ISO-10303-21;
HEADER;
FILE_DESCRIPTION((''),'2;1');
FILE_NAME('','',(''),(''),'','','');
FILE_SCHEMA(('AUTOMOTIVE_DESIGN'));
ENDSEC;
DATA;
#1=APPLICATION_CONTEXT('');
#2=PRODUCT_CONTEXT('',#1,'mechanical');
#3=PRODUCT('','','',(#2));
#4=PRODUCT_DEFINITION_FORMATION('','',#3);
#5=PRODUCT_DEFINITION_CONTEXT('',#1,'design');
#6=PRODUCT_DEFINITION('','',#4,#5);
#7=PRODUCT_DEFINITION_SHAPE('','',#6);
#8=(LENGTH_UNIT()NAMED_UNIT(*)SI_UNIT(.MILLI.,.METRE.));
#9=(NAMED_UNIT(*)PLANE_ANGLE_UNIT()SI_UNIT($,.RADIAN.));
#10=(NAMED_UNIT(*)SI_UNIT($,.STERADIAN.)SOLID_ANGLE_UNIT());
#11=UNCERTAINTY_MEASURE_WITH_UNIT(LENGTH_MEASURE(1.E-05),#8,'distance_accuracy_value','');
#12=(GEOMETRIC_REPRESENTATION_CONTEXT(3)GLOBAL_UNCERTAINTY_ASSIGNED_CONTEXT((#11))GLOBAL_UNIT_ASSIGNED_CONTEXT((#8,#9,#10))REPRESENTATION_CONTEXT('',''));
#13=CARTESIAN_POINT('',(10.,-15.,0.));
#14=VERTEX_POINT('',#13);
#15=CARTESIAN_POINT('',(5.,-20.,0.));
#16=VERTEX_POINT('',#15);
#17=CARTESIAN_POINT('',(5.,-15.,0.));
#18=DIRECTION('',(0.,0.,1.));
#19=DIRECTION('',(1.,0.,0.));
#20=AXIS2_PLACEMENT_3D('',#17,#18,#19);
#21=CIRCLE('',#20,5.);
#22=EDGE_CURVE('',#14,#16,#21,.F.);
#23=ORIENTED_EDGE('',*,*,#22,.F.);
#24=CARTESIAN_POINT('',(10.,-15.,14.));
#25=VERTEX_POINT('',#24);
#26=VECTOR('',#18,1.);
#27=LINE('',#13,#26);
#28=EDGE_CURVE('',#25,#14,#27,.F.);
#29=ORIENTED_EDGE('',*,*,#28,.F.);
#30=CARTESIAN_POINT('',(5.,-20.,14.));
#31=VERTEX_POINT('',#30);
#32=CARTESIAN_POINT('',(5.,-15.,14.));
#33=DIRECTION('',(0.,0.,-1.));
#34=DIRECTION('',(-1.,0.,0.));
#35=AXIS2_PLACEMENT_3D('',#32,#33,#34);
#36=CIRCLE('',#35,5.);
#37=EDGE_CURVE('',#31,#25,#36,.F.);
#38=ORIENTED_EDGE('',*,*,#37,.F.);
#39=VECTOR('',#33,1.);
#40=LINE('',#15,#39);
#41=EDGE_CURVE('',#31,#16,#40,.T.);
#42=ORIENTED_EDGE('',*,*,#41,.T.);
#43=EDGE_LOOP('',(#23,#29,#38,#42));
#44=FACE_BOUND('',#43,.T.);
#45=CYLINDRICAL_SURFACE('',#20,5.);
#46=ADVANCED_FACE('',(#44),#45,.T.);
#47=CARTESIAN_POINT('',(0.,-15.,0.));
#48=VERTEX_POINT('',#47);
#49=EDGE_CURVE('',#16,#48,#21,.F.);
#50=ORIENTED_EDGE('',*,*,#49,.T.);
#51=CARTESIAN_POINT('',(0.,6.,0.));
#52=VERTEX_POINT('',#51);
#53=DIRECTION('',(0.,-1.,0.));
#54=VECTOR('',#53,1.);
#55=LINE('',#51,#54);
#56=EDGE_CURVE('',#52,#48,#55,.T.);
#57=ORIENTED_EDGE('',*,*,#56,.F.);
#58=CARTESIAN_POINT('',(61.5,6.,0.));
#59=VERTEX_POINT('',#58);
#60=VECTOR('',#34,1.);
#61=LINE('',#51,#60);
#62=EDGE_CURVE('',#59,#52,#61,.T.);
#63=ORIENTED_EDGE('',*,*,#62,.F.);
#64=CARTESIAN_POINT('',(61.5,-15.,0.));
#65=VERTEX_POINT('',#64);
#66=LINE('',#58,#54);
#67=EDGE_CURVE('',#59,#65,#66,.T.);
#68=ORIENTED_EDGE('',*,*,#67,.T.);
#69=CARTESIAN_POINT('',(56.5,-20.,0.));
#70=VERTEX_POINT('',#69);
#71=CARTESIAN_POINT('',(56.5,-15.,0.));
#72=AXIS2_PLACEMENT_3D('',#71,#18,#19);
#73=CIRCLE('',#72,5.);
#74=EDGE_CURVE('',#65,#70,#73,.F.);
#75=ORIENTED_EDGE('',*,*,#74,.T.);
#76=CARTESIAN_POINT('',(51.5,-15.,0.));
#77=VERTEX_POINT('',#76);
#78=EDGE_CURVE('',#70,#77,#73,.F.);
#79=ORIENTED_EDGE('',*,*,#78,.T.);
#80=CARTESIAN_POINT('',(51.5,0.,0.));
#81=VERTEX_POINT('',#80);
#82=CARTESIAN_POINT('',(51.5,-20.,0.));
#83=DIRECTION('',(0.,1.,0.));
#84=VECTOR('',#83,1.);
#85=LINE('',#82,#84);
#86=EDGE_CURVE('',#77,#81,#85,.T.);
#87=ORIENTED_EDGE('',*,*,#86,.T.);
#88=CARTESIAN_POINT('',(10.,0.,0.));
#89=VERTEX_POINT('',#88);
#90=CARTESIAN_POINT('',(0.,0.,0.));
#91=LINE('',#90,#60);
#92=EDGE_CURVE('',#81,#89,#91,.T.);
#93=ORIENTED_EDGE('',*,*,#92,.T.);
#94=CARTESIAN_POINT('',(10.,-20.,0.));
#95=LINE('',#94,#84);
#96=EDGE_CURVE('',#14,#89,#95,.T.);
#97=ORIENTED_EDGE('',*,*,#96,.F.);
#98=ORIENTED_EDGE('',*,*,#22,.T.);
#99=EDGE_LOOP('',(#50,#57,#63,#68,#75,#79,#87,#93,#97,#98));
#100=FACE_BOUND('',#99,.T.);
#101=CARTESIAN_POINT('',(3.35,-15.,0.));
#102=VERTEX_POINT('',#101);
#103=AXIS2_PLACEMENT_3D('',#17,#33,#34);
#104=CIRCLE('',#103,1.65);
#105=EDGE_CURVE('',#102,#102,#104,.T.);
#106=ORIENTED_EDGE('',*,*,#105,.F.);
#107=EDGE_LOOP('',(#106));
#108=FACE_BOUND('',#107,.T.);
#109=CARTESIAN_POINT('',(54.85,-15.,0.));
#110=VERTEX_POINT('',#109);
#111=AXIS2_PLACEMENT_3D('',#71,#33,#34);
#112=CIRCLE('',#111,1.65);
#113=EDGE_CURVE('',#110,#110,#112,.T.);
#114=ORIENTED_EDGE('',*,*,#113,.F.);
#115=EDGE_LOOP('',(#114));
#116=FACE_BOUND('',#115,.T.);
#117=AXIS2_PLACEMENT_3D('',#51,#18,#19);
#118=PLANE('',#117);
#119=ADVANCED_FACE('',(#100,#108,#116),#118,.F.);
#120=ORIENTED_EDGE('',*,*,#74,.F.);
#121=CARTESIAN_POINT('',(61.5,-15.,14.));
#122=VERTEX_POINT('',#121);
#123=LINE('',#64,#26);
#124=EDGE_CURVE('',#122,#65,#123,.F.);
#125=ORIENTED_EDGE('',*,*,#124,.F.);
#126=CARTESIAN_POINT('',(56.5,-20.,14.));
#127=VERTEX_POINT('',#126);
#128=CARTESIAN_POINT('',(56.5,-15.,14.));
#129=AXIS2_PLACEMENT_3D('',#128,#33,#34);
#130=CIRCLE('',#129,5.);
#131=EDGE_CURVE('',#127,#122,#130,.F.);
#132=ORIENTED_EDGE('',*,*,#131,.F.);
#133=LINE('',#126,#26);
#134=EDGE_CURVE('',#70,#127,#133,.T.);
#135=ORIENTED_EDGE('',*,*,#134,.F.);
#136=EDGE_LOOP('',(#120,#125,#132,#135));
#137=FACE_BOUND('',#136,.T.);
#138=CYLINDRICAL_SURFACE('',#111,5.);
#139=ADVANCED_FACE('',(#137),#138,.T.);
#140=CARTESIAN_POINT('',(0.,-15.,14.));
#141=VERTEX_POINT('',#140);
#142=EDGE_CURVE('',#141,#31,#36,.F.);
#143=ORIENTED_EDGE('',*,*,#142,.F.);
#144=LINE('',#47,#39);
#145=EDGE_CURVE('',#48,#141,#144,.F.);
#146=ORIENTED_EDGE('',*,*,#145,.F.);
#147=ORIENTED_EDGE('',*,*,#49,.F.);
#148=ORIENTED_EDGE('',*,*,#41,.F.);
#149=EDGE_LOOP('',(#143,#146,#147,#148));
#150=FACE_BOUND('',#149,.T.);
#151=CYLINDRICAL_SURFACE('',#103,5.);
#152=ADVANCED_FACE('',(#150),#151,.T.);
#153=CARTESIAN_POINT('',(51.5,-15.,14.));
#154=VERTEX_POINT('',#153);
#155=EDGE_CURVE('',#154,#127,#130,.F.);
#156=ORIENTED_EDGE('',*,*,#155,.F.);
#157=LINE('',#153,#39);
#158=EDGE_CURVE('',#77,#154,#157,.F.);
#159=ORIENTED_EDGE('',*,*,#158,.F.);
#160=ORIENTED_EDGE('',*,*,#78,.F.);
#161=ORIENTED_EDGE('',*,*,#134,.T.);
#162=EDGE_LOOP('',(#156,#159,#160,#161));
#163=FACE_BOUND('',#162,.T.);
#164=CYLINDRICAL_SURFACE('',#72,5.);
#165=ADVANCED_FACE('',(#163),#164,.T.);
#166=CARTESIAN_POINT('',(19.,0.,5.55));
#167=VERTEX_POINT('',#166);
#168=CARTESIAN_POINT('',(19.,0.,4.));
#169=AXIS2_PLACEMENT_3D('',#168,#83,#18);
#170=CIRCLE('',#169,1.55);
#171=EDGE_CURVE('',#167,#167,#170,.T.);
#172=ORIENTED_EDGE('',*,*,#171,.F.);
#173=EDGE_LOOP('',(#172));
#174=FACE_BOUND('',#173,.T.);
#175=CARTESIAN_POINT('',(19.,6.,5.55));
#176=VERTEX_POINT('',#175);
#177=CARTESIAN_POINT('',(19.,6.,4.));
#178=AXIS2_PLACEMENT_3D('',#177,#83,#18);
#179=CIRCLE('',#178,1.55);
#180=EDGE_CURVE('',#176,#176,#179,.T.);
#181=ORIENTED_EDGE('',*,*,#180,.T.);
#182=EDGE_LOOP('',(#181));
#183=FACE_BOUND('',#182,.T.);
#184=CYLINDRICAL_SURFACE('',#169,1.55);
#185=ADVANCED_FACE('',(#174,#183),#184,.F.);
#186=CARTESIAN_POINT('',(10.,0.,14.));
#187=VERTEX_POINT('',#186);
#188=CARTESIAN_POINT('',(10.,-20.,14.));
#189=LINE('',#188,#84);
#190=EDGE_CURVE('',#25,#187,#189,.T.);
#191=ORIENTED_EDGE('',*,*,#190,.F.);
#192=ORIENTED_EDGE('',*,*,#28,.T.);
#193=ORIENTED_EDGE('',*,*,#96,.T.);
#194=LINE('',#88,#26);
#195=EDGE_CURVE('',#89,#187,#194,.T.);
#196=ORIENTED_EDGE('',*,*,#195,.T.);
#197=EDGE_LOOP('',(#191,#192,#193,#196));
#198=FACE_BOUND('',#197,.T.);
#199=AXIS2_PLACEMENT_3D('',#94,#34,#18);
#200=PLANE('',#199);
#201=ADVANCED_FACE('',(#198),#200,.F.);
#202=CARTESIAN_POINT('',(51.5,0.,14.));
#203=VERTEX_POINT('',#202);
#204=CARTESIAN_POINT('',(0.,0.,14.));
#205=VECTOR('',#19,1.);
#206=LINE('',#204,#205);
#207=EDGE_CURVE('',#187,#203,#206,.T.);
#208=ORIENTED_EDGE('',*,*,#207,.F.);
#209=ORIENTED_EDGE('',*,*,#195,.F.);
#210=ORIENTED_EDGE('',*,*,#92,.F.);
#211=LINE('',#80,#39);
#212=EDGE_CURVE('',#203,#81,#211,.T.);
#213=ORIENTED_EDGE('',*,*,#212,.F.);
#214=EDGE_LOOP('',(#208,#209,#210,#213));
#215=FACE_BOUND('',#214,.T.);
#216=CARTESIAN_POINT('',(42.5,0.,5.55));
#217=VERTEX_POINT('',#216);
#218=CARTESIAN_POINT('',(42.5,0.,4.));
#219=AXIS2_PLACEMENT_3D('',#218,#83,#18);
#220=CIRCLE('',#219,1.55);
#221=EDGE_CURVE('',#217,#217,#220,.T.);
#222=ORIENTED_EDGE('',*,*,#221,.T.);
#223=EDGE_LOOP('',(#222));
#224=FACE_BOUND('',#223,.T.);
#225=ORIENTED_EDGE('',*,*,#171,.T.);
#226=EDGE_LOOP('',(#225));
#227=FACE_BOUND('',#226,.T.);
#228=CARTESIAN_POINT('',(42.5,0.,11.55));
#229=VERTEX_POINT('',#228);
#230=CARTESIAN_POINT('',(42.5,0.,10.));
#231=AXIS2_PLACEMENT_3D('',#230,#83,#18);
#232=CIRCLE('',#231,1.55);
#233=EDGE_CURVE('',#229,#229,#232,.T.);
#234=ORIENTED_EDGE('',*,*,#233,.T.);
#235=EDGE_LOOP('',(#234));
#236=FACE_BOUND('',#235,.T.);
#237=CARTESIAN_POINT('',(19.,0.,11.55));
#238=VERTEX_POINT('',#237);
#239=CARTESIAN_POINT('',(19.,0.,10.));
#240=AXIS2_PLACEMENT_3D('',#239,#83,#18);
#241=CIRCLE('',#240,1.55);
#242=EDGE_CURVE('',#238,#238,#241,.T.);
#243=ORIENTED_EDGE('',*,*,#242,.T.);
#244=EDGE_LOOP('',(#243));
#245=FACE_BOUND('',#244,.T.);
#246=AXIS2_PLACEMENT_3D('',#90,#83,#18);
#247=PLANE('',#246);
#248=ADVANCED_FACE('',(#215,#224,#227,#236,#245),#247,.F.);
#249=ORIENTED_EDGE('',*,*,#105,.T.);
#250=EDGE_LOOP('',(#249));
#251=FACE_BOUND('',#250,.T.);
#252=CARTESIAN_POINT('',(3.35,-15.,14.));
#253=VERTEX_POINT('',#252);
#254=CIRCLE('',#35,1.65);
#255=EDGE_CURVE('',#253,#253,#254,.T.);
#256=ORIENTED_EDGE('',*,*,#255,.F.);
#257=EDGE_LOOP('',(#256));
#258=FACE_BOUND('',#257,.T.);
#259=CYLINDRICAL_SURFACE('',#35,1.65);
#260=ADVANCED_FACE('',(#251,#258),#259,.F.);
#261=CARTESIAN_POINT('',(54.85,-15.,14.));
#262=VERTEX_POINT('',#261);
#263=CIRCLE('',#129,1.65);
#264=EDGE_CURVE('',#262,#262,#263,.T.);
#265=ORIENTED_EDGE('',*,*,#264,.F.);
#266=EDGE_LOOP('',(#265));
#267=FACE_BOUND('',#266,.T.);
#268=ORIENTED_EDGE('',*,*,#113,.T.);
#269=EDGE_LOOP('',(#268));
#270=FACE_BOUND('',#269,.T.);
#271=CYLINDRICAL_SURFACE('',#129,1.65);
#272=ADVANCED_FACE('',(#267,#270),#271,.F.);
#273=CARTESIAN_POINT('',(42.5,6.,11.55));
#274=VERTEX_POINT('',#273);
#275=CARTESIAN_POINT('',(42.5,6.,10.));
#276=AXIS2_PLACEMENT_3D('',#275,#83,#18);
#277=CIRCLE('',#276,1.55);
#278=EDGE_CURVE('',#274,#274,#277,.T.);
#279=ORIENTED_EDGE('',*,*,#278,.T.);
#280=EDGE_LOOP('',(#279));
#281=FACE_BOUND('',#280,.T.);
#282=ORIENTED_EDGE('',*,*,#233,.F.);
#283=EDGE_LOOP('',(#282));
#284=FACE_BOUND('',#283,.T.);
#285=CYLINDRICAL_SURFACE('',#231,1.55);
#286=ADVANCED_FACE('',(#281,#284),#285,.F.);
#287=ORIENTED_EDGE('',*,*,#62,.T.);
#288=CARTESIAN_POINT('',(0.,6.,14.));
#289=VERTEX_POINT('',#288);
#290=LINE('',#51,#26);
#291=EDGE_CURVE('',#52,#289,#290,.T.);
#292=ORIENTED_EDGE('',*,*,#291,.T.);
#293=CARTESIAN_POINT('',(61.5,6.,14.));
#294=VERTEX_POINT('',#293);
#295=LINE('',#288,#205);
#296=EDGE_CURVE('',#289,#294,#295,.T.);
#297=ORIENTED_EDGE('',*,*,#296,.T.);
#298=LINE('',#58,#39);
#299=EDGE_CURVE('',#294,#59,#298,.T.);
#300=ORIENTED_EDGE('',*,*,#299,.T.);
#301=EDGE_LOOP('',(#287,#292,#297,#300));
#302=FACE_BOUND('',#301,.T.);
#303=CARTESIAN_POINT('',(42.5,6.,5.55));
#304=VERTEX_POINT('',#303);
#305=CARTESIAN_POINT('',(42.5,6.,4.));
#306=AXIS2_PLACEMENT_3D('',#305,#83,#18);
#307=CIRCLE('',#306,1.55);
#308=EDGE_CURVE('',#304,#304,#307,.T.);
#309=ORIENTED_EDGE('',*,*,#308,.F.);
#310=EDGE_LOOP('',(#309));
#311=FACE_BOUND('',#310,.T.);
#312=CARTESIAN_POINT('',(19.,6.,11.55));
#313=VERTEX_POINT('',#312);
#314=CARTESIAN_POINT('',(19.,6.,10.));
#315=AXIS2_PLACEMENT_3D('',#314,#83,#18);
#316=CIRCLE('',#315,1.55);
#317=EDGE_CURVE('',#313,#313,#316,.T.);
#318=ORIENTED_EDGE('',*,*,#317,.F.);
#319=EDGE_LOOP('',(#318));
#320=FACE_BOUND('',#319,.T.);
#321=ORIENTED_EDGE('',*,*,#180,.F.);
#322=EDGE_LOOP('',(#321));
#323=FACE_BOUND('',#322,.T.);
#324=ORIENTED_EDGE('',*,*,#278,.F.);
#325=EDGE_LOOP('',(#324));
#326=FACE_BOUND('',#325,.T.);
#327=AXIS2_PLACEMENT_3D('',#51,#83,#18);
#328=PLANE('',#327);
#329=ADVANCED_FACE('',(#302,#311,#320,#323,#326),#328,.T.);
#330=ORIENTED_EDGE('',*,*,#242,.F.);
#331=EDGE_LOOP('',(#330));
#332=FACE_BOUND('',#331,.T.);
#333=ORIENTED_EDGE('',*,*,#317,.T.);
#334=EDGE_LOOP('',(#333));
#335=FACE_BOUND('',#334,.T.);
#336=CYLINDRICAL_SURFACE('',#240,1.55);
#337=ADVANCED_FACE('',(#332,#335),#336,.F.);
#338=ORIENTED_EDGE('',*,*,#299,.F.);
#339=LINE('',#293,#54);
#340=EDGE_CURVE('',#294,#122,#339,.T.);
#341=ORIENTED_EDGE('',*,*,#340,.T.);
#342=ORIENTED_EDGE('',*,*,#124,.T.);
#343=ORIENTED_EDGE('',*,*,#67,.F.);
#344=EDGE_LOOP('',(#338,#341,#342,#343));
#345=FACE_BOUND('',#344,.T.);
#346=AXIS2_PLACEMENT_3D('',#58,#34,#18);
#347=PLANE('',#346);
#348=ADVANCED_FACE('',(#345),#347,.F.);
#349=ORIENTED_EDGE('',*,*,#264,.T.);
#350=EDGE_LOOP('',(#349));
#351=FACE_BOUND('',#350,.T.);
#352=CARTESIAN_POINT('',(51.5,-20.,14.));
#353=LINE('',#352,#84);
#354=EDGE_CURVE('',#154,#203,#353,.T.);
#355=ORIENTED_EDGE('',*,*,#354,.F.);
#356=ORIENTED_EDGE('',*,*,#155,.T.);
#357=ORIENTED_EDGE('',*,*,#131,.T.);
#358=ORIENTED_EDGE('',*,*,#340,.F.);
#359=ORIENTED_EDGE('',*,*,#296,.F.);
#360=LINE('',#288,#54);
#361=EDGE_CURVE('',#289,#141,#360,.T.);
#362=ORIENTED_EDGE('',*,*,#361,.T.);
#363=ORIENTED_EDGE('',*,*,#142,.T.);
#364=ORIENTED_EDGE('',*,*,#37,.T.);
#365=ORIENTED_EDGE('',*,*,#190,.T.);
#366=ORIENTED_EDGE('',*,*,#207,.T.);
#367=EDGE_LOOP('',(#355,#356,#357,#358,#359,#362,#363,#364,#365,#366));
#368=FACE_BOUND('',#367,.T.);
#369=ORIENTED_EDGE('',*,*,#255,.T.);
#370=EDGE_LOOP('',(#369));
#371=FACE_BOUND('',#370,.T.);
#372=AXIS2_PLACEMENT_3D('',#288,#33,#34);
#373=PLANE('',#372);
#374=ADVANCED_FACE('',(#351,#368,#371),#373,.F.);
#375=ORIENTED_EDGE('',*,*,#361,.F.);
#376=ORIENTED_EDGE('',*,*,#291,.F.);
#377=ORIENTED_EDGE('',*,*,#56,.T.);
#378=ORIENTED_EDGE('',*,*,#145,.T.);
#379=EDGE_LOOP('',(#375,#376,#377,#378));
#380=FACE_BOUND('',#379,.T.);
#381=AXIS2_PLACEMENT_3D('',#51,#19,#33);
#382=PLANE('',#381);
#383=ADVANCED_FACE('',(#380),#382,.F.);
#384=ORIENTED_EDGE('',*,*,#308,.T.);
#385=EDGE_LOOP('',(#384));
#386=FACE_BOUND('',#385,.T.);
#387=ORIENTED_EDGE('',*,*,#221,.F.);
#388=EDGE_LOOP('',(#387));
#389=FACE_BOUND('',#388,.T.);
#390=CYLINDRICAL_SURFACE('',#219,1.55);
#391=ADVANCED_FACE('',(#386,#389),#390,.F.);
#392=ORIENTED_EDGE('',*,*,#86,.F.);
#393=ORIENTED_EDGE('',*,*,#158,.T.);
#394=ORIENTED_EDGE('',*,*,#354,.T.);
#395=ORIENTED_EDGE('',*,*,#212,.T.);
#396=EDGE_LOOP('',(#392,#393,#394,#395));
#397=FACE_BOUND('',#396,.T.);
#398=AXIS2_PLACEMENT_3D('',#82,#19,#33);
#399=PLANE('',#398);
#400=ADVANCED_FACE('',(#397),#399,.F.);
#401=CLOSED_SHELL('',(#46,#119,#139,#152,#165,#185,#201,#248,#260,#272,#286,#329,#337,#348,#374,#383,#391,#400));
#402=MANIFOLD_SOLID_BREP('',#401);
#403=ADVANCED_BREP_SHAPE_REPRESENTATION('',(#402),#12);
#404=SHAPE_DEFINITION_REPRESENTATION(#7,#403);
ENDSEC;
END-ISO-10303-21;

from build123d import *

# Parameters (mm, degrees)
SKETCH1_W           = 61.5
SKETCH1_H           = 14
BOSS_EXTRUDE1_DEPTH = 6
SKETCH2_R           = 1.55
CUT_EXTRUDE1_DEPTH  = 64.358109189
SKETCH3_W           = 10
SKETCH3_H           = 14
BOSS_EXTRUDE2_DEPTH = 20
SKETCH4_R           = 1.65
CUT_EXTRUDE2_DEPTH  = 67.168345906
FILLET1_R           = 5


with BuildPart() as part:
    # Sketch1 → Boss-Extrude1 (new body)
    with BuildSketch(Plane(origin=(0, 0, 0), x_dir=(1, 0, 0), z_dir=(0, 1, 0))):
        with Locations((30.75, -7)):
            Rectangle(SKETCH1_W, SKETCH1_H)
    extrude(amount=BOSS_EXTRUDE1_DEPTH)

    # Sketch2 → Cut-Extrude1 (cut, through all)
    with BuildSketch(Plane(origin=(0, 6, 0), x_dir=(1, 0, 0), z_dir=(0, 1, 0))):
        with Locations(Location((19, -4, 0), (0, 0, 270))):
            Circle(SKETCH2_R)
        with Locations(Location((42.5, -4, 0), (0, 0, 270))):
            Circle(SKETCH2_R)
        with Locations(Location((19, -10, 0), (0, 0, 270))):
            Circle(SKETCH2_R)
        with Locations(Location((42.5, -10, 0), (0, 0, 270))):
            Circle(SKETCH2_R)
    extrude(amount=-CUT_EXTRUDE1_DEPTH, mode=Mode.SUBTRACT)

    # Sketch3 → Boss-Extrude2 (add)
    with BuildSketch(Plane(origin=(0, 0, 0), x_dir=(-1, 0, 0), z_dir=(0, -1, 0))):
        with Locations((-5, -7)):
            Rectangle(SKETCH3_W, SKETCH3_H)
        with Locations((-56.5, -7)):
            Rectangle(SKETCH3_W, SKETCH3_H)
    extrude(amount=BOSS_EXTRUDE2_DEPTH)

    # Sketch4 → Cut-Extrude2 (cut, through all)
    with BuildSketch(Plane(origin=(0, 0, 0), x_dir=(-1, 0, 0), z_dir=(0, 0, -1))):
        with Locations((-5, -15)):
            Circle(SKETCH4_R)
        with Locations((-56.5, -15)):
            Circle(SKETCH4_R)
    extrude(amount=-CUT_EXTRUDE2_DEPTH, mode=Mode.SUBTRACT)

    # Fillet1
    fillet1_edges = [part.edges().sort_by_distance(p)[0] for p in [
        (10, -20, 7),
        (0, -20, 7),
        (51.5, -20, 7),
        (61.5, -20, 7),
    ]]
    fillet(fillet1_edges, radius=FILLET1_R - 0.0001)  # a hair under: the kernel refuses the full size


solid = part.part
